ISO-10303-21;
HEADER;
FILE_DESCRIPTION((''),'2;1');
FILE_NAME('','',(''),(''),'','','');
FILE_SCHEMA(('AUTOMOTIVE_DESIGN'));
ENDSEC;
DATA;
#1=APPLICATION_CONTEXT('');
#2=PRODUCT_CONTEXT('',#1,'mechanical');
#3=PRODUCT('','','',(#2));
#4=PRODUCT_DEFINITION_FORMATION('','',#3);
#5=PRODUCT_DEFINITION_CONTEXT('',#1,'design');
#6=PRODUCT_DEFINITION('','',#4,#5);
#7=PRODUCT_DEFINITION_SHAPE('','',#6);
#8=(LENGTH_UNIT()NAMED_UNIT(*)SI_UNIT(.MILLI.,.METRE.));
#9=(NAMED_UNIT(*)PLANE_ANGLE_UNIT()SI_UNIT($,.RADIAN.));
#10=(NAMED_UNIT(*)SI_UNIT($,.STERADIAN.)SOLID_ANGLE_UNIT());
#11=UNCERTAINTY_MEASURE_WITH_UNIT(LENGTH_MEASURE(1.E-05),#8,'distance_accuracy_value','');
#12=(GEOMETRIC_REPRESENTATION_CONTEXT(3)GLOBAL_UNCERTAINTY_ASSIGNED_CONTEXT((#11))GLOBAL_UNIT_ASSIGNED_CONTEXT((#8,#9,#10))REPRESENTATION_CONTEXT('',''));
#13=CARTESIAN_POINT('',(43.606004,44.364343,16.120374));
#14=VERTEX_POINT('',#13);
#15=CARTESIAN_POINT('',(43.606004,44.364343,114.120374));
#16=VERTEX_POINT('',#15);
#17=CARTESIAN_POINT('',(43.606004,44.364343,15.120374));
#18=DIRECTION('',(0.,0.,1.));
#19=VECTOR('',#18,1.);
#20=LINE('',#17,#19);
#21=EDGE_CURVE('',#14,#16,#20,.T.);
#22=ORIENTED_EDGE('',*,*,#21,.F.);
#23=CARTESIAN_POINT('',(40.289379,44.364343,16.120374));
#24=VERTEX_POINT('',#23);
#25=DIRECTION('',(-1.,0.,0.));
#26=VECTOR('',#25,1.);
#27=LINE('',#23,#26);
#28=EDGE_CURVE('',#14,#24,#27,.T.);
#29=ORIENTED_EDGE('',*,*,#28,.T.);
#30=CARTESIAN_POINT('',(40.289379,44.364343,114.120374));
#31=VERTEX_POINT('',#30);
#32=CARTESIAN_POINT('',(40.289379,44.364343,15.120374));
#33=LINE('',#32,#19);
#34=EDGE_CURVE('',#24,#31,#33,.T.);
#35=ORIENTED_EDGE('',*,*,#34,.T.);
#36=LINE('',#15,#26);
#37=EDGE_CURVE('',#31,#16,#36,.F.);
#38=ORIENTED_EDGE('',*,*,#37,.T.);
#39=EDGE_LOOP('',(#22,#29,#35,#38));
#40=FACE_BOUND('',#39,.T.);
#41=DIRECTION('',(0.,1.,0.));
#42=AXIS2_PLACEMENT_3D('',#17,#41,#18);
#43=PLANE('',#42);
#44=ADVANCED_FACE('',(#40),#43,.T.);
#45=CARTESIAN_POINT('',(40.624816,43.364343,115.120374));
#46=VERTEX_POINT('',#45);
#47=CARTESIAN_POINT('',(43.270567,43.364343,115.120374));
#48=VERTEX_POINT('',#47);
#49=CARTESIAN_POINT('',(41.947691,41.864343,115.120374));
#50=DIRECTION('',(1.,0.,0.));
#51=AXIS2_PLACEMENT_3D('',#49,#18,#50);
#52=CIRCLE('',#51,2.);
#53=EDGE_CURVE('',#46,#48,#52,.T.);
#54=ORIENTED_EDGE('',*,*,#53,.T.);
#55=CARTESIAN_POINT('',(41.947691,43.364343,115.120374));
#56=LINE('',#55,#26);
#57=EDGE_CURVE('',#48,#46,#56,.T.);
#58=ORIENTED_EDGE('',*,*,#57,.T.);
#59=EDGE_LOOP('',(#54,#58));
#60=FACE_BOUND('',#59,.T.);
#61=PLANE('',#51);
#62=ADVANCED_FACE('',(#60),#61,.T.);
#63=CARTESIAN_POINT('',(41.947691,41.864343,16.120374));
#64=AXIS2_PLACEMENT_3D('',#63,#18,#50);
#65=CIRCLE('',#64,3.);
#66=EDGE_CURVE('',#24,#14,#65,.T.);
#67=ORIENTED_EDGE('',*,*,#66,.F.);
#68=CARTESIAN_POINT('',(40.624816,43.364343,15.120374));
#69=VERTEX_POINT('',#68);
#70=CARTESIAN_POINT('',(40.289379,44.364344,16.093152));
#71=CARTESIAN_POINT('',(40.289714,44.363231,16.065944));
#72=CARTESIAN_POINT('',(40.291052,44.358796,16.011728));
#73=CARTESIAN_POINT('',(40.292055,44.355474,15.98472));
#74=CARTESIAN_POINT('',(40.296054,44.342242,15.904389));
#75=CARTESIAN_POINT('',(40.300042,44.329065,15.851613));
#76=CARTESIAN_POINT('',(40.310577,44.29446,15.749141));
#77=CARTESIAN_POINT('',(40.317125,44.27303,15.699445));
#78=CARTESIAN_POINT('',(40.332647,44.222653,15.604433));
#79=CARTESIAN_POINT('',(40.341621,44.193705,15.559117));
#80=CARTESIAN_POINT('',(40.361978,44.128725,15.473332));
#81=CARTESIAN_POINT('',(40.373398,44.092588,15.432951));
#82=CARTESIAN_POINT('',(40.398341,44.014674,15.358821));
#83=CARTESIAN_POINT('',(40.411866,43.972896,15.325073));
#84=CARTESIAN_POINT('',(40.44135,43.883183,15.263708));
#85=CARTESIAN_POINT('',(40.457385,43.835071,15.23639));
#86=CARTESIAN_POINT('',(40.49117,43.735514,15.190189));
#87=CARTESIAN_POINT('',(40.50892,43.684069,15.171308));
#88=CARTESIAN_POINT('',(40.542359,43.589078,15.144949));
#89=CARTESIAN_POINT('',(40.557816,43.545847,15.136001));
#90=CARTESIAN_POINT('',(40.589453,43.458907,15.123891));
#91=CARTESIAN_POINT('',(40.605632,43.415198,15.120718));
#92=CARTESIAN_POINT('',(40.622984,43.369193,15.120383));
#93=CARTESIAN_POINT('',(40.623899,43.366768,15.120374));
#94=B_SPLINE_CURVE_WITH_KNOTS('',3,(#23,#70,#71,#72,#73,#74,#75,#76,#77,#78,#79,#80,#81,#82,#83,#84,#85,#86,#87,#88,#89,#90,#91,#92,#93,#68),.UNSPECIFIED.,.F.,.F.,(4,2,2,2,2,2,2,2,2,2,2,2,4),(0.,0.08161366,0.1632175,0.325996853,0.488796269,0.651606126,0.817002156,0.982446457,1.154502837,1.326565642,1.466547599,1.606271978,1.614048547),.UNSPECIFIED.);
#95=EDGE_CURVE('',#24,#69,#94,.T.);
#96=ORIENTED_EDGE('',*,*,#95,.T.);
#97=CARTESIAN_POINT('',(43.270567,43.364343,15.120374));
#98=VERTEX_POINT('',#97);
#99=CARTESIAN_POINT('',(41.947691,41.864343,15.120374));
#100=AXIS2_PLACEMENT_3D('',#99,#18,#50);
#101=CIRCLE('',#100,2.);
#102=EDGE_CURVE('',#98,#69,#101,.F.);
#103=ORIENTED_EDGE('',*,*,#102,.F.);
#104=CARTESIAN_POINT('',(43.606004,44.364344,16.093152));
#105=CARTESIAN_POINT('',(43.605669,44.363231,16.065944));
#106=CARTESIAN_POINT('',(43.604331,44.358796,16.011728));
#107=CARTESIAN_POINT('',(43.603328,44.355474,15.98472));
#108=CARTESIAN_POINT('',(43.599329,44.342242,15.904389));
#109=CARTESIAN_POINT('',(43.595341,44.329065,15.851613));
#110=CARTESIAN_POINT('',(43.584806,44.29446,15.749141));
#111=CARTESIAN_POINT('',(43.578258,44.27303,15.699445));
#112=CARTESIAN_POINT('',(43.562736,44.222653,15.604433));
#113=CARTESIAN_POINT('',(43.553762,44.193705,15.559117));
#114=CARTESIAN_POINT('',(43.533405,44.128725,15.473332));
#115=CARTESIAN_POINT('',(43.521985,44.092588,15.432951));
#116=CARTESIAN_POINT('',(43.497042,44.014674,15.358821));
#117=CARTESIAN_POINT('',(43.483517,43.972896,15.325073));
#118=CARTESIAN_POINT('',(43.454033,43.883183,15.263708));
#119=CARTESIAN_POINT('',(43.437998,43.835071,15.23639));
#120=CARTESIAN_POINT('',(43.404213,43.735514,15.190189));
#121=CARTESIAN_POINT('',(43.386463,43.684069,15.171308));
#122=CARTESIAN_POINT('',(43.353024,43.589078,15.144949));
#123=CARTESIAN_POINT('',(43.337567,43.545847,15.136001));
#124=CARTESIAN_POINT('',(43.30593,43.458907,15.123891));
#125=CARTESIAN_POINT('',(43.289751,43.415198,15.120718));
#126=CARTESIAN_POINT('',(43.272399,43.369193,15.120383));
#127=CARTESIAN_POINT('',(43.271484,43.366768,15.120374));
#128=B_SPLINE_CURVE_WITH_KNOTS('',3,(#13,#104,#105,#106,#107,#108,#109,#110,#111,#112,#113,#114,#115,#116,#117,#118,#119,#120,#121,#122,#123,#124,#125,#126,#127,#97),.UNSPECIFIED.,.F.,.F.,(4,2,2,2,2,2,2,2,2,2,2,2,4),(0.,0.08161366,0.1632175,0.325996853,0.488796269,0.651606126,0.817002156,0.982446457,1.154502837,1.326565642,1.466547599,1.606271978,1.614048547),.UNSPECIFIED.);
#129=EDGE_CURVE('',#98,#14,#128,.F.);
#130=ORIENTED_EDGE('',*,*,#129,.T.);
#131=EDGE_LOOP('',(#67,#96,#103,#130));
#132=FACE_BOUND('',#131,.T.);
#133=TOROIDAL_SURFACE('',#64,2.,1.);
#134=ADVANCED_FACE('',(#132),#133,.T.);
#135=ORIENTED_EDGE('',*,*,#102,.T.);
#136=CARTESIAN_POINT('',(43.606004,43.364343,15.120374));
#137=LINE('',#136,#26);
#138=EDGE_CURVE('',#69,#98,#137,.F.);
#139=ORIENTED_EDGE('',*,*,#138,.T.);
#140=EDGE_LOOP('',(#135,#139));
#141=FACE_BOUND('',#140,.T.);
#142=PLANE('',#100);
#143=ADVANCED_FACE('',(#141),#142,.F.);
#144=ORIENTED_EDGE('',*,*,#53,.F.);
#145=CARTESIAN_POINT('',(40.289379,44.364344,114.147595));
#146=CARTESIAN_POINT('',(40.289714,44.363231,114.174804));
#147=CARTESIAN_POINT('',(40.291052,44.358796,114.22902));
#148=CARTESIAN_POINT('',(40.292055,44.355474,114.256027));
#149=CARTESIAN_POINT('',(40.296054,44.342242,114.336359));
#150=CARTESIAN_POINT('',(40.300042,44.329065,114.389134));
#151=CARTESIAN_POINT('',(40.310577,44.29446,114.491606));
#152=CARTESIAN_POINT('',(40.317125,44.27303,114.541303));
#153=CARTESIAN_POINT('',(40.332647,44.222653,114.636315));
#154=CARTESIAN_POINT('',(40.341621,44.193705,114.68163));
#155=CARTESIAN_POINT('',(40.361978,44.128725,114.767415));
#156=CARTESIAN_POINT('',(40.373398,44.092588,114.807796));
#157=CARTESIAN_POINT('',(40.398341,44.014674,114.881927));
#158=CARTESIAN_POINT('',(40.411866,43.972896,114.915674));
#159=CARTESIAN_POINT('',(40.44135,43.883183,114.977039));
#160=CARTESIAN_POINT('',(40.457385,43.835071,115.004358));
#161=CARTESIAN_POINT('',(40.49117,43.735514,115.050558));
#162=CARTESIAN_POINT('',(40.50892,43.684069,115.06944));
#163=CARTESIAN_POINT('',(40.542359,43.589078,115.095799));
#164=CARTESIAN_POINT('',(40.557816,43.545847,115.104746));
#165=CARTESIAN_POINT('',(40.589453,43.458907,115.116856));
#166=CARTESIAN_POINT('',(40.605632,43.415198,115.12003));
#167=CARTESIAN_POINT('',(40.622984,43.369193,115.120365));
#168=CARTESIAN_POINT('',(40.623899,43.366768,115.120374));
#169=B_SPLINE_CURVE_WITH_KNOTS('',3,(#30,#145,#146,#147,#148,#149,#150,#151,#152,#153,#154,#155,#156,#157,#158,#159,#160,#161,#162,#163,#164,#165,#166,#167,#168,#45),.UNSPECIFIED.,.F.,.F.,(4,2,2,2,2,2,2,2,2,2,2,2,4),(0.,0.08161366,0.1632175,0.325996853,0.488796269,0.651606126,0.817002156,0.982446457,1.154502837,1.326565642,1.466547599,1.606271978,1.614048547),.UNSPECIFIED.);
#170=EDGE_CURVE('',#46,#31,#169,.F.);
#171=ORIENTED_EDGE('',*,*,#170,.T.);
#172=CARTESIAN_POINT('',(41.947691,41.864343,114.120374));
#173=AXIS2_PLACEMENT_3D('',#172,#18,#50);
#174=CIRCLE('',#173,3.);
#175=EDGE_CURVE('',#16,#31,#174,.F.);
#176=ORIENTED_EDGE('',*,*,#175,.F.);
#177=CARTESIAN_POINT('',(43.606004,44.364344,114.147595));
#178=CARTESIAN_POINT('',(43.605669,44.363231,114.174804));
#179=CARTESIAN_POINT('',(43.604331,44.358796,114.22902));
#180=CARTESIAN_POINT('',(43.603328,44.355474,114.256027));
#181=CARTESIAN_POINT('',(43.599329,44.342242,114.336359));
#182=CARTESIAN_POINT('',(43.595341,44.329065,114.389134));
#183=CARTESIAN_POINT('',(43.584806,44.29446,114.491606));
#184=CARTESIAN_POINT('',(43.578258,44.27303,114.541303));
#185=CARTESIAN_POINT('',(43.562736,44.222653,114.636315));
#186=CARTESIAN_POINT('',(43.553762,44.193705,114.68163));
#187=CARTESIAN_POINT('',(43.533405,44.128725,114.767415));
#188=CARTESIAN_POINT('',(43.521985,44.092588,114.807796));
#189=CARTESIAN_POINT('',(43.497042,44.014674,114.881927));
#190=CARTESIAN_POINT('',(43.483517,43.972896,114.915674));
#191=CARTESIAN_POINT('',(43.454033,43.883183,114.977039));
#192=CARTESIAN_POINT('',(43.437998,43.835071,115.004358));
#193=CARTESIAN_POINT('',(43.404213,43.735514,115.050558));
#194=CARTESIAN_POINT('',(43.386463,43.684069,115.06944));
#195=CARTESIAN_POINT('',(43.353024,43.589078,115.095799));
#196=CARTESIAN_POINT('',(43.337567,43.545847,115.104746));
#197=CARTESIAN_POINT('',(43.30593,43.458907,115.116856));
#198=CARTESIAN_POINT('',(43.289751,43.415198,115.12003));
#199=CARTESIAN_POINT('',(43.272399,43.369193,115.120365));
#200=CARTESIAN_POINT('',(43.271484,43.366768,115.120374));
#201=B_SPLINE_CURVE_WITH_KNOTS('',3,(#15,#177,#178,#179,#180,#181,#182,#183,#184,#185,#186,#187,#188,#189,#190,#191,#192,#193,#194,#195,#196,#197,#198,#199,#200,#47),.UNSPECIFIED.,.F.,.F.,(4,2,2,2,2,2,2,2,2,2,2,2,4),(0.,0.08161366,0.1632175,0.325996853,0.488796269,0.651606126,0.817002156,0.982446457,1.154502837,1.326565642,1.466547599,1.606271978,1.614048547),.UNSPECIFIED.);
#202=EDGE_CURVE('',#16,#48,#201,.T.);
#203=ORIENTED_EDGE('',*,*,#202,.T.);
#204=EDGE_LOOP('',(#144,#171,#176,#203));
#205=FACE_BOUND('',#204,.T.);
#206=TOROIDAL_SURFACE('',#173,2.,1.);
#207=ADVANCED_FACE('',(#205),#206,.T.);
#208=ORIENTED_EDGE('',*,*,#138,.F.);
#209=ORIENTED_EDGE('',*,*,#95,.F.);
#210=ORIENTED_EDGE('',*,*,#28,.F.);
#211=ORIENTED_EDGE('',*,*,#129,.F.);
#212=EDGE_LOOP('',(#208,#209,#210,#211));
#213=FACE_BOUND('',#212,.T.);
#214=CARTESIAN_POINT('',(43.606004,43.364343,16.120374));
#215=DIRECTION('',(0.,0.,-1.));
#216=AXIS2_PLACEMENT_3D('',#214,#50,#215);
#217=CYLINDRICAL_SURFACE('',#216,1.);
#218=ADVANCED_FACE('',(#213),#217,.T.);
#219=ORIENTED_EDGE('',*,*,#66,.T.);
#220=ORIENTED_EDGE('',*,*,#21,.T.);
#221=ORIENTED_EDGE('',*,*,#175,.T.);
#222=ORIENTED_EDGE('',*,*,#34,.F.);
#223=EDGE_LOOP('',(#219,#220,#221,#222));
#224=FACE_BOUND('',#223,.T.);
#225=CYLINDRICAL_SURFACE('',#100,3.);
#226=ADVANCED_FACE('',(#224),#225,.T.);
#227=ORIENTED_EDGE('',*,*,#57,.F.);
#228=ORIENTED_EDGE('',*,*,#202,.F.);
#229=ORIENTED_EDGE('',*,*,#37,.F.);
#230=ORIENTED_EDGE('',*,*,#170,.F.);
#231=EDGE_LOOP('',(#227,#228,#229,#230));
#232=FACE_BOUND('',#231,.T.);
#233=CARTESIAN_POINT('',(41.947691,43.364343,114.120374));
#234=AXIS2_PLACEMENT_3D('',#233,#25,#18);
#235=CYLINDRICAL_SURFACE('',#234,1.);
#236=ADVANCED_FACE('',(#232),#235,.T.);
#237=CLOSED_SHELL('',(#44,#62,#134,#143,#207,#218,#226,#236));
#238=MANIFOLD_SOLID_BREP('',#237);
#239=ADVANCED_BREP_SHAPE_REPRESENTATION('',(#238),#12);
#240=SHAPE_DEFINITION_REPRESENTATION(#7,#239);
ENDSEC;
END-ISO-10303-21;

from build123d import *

# Parameters (mm, degrees)
BOSS_EXTRUDE1_DEPTH = 100
FILLET1_R           = 1


with BuildPart() as part:
    # Sketch1 → Boss-Extrude1 (new body)
    with BuildSketch(Plane.XY.offset(115.120373728)):
        with BuildLine():
            Line((43.606003854, 44.364343494), (40.289379064, 44.364343494))
            ThreePointArc((40.289379064, 44.364343494), (41.947691459, 38.864343494), (43.606003854, 44.364343494))
        make_face()
    extrude(amount=-BOSS_EXTRUDE1_DEPTH)

    # Fillet1
    # the kernel refuses this fillet: 1 mm, written as the material it takes off along each edge
    with BuildSketch(Plane(origin=(46.106003854, 44.364343494, 115.120373728), x_dir=(0, 0, -1), z_dir=(-1, 0, 0))) as fillet1_piece_1:
        with BuildLine():
            CenterArc((FILLET1_R, FILLET1_R), FILLET1_R, 180, 90)
            Line((0, FILLET1_R), (0, 0))
            Line((0, 0), (FILLET1_R, 0))
        make_face()
    extrude(amount=8.31662479, mode=Mode.SUBTRACT)
    with BuildSketch(Plane(origin=(41.947691459, 41.864343494, 115.120373728), x_dir=(-0.0031415874858803736, 0.9999950652018582, 0), z_dir=(0.9999950652018582, 0.0031415874858803736, 0))) as fillet1_piece_2:
        with BuildLine():
            CenterArc((3 - FILLET1_R, -FILLET1_R), FILLET1_R, 0, 90)
            Line((3 - FILLET1_R, 0), (3, 0))
            Line((3, 0), (3, -FILLET1_R))
        make_face()
    revolve(axis=Axis((41.947691459, 41.864343494, 115.120373728), (0, 0, 1)), revolution_arc=359.64, mode=Mode.SUBTRACT)
    with BuildSketch(Plane(origin=(41.947691459, 41.864343494, 15.120373728), x_dir=(-0.0031415874858803736, 0.9999950652018582, 0), z_dir=(0.9999950652018582, 0.0031415874858803736, 0))) as fillet1_piece_3:
        with BuildLine():
            CenterArc((3 - FILLET1_R, FILLET1_R), FILLET1_R, 270, 90)
            Line((3 - FILLET1_R, 0), (3, 0))
            Line((3, 0), (3, FILLET1_R))
        make_face()
    revolve(axis=Axis((41.947691459, 41.864343494, 15.120373728), (0, 0, 1)), revolution_arc=359.64, mode=Mode.SUBTRACT)
    with BuildSketch(Plane(origin=(46.106003854, 44.364343494, 15.120373728), x_dir=(0, 0, 1), z_dir=(-1, 0, 0))) as fillet1_piece_4:
        with BuildLine():
            CenterArc((FILLET1_R, -FILLET1_R), FILLET1_R, 90, 90)
            Line((0, -FILLET1_R), (0, 0))
            Line((0, 0), (FILLET1_R, 0))
        make_face()
    extrude(amount=8.31662479, mode=Mode.SUBTRACT)


solid = part.part
